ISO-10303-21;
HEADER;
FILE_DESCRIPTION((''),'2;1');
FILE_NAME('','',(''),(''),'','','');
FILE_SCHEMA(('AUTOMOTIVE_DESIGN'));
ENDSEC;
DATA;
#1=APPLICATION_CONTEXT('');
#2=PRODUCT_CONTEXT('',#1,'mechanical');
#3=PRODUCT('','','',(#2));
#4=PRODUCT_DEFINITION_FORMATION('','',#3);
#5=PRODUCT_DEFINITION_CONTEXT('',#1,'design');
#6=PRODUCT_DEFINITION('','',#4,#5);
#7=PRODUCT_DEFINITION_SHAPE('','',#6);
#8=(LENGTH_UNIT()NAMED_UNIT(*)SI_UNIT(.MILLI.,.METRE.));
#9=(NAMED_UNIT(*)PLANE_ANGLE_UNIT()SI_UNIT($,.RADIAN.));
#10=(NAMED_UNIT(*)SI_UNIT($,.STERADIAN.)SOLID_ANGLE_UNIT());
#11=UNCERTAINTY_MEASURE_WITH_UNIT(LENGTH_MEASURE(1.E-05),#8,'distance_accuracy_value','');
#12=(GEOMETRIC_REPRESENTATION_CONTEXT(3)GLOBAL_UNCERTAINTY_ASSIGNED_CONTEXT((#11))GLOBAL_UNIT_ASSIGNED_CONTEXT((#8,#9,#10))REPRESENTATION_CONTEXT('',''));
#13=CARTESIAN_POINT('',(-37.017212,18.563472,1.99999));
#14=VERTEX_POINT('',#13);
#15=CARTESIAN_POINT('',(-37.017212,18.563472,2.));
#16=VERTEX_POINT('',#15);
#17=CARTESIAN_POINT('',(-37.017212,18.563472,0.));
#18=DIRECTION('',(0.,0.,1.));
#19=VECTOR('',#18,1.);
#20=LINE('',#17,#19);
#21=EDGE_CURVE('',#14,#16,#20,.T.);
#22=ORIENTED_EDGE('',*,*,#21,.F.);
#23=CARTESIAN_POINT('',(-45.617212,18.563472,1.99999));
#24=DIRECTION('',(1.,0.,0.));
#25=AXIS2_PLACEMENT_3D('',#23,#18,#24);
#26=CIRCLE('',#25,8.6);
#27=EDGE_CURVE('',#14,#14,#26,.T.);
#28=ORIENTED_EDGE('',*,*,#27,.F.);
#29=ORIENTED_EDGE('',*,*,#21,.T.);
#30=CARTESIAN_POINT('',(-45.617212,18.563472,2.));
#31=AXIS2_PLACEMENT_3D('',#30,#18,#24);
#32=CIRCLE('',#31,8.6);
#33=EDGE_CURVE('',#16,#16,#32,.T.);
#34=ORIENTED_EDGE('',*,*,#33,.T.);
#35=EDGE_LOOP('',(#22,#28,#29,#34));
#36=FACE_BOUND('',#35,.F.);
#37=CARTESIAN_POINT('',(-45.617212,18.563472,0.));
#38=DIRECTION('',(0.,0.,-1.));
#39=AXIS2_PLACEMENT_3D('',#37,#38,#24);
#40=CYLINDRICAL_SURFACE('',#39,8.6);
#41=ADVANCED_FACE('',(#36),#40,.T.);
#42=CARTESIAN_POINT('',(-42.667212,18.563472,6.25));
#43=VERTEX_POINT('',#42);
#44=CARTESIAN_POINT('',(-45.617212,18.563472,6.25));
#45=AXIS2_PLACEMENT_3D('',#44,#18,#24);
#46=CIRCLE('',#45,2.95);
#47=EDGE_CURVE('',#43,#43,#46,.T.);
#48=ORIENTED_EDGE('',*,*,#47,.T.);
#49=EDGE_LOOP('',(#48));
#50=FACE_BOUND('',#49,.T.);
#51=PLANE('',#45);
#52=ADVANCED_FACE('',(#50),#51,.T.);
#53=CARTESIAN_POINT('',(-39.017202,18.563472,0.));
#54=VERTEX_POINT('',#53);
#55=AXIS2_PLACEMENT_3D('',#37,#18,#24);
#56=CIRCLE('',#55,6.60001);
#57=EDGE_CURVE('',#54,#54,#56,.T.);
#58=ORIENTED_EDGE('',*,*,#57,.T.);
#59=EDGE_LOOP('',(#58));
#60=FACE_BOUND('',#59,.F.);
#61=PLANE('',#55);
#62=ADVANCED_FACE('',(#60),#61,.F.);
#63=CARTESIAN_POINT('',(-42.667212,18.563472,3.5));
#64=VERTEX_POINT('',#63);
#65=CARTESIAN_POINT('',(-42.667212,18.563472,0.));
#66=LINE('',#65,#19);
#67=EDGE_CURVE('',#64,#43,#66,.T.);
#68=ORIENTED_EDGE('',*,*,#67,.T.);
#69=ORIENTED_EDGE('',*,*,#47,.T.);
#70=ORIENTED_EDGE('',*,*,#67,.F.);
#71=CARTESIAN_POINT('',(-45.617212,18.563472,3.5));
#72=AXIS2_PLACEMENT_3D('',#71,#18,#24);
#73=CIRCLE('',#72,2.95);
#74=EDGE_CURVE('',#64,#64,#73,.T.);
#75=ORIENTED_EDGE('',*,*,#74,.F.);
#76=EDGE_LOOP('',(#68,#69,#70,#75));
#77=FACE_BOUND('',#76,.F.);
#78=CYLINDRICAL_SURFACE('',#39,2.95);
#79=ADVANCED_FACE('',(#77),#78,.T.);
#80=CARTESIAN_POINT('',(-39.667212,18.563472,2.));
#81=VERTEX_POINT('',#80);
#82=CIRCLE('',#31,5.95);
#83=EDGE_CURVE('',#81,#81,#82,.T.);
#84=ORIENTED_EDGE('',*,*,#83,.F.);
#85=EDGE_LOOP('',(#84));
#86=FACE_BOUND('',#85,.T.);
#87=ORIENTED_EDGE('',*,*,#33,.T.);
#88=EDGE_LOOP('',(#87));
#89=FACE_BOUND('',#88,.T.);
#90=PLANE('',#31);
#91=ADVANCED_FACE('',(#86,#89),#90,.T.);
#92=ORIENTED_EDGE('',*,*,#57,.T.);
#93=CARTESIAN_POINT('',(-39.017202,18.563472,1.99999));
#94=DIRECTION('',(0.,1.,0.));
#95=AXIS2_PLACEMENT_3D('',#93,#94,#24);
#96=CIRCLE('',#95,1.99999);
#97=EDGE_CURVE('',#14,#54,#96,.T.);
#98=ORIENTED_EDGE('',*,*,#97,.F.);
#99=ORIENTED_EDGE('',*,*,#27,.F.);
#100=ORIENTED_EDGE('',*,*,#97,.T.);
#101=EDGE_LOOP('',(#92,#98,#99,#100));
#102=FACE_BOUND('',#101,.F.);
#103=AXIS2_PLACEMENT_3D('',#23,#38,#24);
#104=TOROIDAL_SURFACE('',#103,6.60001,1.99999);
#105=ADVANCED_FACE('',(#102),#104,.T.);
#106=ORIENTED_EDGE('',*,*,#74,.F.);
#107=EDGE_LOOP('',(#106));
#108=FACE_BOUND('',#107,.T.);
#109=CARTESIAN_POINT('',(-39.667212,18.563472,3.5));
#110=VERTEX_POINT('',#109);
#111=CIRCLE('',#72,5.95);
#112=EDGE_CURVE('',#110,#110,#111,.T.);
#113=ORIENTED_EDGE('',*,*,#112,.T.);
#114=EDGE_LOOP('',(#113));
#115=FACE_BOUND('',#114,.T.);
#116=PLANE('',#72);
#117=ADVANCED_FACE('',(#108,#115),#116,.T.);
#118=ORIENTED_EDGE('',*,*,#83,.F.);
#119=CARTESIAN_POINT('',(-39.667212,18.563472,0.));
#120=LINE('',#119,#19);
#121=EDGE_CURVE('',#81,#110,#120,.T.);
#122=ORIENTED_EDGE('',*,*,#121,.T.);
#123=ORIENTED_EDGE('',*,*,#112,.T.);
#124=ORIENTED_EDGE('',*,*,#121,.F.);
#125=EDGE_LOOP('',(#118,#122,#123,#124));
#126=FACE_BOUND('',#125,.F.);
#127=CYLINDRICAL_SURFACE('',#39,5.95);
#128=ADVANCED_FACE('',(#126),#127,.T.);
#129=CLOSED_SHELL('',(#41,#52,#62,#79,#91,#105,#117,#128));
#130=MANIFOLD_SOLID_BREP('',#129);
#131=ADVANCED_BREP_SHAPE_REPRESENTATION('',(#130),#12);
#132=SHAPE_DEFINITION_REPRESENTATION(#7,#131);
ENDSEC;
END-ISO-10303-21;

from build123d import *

# Parameters (mm, degrees)
F0_R     = 8.6
F0_R_2   = 5.95
F1_DEPTH = 2
F0_R_3   = 2.95
F2_DEPTH = 3.5
F3_DEPTH = 6.25
F4_R     = 1.99999


# Not quite as in the source:
# - a fillet or chamfer is up to 0.001 mm smaller than in the source, because OpenCascade refuses the exact size
# - a feature names something its author has since deleted; it is built from what else it names


with BuildPart() as f1:
    # F0 (on Top) → F1 (new body)
    with BuildSketch(Plane.XY):
        with Locations((-45.6172116101, 18.5634717345)):
            Circle(F0_R)
        with Locations((-45.6172116101, 18.5634717345)):
            Circle(F0_R_2, mode=Mode.SUBTRACT)
    extrude(amount=F1_DEPTH)

    # F0 (on Top) → F2 (join)
    with BuildSketch(Plane.XY):
        with Locations((-45.6172116101, 18.5634717345)):
            Circle(F0_R_2)
        with Locations((-45.6172116101, 18.5634717345)):
            Circle(F0_R_3, mode=Mode.SUBTRACT)
    extrude(amount=F2_DEPTH)

    # F0 (on Top) → F3 (join)
    with BuildSketch(Plane.XY):
        with Locations((-45.6172116101, 18.5634717345)):
            Circle(F0_R_3)
    extrude(amount=F3_DEPTH)

    # F4 (radius 2 in the source; OpenCascade refuses exactly that, so slightly less here)
    f4_edges = [f1.edges().sort_by_distance(p)[0] for p in [
        (-54.217212, 18.563472, 0),
    ]]
    fillet(f4_edges, radius=F4_R)


solid = f1.part
